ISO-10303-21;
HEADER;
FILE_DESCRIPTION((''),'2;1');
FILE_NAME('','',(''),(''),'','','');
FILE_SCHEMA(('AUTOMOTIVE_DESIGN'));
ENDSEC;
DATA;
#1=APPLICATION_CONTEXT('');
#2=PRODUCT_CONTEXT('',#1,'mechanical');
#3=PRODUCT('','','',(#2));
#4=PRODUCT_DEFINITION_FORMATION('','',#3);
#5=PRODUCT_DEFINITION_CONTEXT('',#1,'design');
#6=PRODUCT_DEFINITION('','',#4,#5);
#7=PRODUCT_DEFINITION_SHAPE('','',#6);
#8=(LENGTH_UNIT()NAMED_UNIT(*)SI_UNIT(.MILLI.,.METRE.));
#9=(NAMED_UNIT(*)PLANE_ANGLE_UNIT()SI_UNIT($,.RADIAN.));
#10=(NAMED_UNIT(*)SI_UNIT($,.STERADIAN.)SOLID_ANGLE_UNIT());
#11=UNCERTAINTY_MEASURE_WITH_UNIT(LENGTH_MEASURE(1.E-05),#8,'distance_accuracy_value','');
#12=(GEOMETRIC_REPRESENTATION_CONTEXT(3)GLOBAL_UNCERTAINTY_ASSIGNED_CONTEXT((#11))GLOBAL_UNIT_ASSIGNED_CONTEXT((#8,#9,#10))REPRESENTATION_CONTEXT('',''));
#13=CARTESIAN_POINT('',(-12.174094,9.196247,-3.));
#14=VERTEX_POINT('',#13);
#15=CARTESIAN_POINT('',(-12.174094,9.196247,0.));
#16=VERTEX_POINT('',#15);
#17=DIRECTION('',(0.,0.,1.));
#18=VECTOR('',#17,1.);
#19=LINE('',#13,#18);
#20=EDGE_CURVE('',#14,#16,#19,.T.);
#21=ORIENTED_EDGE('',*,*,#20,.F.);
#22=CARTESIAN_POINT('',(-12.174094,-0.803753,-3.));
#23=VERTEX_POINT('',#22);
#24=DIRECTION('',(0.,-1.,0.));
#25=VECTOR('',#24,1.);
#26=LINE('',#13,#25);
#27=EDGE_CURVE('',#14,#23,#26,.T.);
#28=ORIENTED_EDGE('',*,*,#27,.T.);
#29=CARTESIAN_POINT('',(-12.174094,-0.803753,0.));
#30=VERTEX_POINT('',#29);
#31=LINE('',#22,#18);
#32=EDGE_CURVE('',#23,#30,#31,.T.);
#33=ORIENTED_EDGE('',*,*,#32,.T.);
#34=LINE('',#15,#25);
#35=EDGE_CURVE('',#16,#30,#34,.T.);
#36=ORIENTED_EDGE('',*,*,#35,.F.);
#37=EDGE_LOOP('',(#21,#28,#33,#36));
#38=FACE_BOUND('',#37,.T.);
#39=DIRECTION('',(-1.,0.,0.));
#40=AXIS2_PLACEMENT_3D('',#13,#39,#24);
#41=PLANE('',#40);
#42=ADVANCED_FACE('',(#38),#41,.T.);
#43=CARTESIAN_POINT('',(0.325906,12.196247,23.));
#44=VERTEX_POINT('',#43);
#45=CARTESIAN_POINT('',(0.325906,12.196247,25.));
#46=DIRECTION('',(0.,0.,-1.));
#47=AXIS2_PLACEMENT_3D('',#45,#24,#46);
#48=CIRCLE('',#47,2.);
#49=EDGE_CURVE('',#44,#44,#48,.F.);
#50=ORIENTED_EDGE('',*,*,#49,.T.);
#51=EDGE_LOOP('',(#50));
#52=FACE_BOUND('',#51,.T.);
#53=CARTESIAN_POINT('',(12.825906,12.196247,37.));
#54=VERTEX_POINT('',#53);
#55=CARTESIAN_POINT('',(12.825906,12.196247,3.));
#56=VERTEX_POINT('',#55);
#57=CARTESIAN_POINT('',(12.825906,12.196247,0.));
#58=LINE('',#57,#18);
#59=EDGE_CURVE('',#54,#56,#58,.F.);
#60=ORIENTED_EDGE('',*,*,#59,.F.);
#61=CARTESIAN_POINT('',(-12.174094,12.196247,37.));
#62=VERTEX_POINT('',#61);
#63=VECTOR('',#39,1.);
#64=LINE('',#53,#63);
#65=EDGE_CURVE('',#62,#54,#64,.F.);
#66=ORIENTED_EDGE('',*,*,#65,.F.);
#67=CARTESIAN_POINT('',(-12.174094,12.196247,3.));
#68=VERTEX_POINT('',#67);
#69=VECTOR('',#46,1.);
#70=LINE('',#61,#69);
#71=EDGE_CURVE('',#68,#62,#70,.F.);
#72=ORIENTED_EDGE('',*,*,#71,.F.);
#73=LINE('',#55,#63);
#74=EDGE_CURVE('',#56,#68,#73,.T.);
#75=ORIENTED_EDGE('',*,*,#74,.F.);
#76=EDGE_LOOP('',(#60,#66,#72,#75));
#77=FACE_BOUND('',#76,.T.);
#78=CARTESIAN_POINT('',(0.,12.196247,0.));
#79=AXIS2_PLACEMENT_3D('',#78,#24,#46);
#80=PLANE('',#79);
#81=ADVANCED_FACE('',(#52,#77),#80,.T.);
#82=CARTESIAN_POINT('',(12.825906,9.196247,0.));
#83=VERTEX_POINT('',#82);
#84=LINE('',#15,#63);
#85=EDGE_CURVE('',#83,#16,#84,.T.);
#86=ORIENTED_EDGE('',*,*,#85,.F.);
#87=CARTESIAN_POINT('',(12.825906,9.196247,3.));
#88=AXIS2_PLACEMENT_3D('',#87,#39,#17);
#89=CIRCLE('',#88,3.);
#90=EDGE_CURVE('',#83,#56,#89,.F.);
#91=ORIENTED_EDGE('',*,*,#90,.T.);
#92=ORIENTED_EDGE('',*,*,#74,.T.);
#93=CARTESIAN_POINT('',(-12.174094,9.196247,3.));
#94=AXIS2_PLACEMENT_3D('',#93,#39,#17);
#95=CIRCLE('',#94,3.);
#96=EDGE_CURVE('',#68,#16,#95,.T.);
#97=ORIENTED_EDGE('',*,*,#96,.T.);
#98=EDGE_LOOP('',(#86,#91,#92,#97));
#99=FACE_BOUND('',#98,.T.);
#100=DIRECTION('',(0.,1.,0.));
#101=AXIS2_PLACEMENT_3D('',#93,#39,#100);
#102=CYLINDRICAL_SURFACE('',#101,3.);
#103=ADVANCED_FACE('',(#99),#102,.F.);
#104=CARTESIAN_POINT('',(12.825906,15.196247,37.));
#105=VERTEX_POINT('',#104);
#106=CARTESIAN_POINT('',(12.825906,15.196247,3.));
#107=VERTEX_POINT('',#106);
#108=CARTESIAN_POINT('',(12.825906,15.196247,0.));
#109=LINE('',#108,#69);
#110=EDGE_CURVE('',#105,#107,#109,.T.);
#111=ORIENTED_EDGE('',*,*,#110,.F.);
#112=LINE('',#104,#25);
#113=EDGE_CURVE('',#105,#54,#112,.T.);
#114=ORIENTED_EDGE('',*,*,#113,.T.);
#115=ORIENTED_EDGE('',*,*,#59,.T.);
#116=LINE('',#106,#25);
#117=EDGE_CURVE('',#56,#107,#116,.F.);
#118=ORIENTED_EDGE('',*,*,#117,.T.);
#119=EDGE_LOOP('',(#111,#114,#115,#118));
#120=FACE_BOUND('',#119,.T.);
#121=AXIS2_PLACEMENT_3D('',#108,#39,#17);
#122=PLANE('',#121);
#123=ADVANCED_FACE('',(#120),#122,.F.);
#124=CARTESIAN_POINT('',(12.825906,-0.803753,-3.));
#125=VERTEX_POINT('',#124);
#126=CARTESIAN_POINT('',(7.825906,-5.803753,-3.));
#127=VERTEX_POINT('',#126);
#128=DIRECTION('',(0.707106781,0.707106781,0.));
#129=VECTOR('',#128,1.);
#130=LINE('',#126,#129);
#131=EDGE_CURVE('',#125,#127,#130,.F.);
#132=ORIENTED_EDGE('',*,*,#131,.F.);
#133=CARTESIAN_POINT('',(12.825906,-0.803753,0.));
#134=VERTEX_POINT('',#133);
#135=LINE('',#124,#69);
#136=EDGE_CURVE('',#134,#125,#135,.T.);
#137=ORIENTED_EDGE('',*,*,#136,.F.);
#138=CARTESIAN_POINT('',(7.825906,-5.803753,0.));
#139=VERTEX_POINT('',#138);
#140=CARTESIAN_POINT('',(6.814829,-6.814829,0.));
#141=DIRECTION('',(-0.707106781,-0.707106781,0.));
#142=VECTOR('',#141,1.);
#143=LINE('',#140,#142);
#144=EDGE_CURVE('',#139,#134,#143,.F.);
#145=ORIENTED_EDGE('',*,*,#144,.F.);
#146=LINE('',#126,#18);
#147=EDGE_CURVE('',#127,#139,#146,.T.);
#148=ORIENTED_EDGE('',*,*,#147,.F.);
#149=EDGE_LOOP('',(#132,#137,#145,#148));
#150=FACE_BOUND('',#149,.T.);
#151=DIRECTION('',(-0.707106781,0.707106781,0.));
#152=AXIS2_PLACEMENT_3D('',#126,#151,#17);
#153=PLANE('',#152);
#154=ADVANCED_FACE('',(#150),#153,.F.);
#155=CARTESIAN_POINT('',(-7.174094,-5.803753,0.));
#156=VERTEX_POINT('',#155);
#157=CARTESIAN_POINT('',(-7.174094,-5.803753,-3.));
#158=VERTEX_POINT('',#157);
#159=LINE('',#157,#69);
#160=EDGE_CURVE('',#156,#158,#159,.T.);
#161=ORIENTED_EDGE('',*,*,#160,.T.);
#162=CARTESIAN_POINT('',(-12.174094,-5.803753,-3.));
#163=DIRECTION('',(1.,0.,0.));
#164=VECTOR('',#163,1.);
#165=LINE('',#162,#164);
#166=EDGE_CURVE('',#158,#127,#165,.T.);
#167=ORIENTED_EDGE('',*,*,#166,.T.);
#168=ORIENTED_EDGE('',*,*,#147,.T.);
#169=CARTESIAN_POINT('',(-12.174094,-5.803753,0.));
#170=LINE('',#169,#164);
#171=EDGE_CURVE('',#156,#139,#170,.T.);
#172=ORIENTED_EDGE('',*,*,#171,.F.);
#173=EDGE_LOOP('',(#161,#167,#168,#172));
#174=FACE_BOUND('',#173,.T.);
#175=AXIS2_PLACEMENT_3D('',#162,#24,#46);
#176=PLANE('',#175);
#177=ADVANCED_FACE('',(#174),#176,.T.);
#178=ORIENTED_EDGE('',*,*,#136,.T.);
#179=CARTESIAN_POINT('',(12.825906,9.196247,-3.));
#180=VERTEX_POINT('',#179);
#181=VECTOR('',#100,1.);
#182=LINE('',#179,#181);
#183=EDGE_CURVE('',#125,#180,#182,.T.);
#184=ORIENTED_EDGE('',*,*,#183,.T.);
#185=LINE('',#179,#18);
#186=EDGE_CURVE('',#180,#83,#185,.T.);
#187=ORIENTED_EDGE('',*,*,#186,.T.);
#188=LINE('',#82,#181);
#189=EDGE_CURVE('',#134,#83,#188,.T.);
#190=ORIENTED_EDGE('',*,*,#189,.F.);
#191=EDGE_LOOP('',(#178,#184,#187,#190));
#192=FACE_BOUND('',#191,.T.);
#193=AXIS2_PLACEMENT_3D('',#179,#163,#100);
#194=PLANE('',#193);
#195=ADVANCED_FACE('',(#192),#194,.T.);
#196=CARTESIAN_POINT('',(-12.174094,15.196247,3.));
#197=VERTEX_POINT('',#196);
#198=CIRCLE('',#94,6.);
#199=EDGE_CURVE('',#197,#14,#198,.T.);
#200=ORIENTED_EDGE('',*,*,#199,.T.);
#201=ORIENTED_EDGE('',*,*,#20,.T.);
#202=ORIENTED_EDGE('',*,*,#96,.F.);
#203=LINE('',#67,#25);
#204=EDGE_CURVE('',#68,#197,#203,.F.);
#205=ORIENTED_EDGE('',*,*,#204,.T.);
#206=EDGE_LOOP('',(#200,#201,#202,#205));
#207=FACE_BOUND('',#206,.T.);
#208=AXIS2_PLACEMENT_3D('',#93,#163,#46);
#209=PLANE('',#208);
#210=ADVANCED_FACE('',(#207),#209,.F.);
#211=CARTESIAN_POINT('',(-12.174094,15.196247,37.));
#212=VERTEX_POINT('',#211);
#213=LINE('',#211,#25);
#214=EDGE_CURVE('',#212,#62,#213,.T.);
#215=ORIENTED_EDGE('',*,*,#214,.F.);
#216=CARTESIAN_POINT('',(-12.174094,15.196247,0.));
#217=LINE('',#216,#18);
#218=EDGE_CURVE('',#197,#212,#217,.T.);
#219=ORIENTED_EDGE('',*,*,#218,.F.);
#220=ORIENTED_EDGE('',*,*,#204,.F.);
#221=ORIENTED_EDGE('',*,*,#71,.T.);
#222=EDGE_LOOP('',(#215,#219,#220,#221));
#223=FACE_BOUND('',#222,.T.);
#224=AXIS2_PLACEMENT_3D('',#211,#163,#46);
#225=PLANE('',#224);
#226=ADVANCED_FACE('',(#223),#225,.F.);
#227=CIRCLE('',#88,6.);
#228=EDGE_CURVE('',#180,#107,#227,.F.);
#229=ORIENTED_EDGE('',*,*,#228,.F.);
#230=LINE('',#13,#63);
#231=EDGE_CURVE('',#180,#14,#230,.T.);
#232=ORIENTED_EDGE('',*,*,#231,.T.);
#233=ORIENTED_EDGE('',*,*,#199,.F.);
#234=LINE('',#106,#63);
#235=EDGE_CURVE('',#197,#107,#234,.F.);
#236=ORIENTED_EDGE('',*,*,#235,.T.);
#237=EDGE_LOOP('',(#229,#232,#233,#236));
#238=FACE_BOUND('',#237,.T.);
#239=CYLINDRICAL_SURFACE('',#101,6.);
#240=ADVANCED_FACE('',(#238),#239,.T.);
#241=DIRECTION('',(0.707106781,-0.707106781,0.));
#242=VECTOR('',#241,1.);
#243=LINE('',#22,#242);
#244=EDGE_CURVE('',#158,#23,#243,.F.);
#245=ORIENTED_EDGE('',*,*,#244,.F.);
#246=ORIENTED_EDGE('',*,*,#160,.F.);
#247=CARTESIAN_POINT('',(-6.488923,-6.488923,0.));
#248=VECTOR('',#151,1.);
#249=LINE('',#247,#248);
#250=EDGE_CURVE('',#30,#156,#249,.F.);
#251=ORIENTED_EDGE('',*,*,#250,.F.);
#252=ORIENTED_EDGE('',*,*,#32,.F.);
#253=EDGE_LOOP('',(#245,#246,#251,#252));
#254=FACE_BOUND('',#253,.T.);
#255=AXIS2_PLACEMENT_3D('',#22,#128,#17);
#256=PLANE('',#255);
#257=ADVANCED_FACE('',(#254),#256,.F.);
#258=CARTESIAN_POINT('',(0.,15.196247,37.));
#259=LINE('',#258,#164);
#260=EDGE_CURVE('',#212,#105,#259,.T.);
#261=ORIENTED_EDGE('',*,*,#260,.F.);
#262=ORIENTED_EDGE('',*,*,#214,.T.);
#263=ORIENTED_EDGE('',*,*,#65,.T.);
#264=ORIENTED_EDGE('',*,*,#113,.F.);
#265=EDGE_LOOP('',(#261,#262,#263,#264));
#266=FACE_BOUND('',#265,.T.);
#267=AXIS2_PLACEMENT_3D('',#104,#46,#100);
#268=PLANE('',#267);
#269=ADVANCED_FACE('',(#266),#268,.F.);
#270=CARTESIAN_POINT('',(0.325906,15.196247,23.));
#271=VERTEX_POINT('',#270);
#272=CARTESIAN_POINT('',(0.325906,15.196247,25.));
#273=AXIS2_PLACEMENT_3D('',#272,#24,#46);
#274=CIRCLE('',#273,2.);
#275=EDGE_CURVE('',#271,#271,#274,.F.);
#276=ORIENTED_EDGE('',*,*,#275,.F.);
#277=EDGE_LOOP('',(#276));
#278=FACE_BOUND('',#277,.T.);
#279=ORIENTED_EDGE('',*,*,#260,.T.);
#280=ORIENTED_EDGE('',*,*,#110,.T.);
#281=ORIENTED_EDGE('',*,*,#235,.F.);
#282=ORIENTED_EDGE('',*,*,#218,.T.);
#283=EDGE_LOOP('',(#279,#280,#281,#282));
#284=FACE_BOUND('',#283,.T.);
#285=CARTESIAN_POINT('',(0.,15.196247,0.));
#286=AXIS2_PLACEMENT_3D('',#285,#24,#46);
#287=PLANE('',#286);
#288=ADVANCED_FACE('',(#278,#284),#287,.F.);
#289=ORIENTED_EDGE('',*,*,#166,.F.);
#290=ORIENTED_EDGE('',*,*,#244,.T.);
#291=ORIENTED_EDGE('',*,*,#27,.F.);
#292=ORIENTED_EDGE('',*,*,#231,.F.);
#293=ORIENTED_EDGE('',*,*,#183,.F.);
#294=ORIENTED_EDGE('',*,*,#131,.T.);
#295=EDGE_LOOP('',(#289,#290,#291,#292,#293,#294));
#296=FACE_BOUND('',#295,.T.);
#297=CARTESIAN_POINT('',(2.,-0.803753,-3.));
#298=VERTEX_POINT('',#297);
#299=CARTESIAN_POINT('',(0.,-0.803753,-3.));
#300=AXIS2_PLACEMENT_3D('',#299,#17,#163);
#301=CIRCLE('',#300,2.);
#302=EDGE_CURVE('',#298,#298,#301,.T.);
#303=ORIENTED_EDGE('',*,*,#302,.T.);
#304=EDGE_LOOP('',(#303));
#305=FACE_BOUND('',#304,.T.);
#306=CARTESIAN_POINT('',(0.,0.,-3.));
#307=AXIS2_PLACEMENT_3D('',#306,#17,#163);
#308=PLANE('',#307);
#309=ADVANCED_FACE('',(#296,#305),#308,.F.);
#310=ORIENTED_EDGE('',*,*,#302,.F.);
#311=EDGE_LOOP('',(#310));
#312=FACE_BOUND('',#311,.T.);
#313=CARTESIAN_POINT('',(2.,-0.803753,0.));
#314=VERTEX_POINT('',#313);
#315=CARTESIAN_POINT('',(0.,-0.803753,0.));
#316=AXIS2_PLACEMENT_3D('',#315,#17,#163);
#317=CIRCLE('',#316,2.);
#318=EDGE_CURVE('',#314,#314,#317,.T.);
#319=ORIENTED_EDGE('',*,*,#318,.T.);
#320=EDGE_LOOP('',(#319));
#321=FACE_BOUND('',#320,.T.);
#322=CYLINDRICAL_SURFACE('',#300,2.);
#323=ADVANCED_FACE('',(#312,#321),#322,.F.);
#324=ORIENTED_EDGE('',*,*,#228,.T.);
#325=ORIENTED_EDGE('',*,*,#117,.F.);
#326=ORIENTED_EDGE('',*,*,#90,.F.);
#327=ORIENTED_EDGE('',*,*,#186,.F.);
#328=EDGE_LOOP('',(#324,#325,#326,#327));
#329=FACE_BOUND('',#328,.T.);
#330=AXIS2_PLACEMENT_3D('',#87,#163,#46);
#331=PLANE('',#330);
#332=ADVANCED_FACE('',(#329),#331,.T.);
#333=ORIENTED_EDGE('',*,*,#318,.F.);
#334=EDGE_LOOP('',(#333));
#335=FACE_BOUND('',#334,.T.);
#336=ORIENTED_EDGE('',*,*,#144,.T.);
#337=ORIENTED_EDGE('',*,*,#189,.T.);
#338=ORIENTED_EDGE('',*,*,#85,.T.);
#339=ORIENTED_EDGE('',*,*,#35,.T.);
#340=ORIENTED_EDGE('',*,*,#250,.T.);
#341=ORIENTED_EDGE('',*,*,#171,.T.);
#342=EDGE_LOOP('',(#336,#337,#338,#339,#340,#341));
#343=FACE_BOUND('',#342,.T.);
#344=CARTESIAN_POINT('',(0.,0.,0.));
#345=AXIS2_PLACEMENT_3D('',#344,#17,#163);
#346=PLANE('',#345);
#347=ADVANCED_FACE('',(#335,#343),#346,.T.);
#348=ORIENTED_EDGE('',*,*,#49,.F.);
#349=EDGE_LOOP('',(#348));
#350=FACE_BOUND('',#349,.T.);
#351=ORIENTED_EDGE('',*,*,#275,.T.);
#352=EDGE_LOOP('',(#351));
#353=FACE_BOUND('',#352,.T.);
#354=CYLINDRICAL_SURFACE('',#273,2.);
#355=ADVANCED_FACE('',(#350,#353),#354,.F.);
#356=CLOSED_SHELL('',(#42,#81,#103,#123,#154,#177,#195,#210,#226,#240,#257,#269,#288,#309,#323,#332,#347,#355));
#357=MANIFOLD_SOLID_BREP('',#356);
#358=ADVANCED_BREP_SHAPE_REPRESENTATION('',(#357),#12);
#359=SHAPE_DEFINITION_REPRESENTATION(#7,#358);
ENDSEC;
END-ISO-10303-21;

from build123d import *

# Parameters (mm, degrees)
SKETCH1_W                 = 25
SKETCH1_H                 = 15
SKETCH1_R                 = 2
BASE_FLANGE1_DEPTH        = 3
EDGE_FLANGE1_DEPTH        = 25
EDGE_FLANGE1_START        = 3
EDGE_FLANGE1_PROFILE_W    = 25
EDGE_FLANGE1_PROFILE_H    = 34
EDGE_FLANGE1_PROFILE_R    = 2
EDGE_FLANGE1_FLAT_DEPTH   = 3
BREAK_CORNER1_START       = -12.712257412
BREAK_CORNER1_OUTLINE_W   = 19.637623744
BREAK_CORNER1_OUTLINE_H   = 3
BREAK_CORNER1_DEPTH       = 3.535533905
BREAK_CORNER1_START_2     = 1.429878211
BREAK_CORNER1_2_OUTLINE_W = 4.362376256
BREAK_CORNER1_2_OUTLINE_H = 3
BREAK_CORNER1_2_DEPTH     = 7.071067812


# Read off the part's stored shape, not the designer's step: Break-Corner1
# Sheet-metal steps are written as plain solids
with BuildPart() as part:
    # Sketch1 → Base-Flange1 (new body)
    with BuildSketch(Plane.XY):
        with Locations((0.325905683, 1.696247476)):
            Rectangle(SKETCH1_W, SKETCH1_H)
        with Locations((0, -0.803752524)):
            Circle(SKETCH1_R, mode=Mode.SUBTRACT)
    extrude(amount=-BASE_FLANGE1_DEPTH)

    # Edge-Flange1 bend section (across the edge) → Edge-Flange1 (add)
    with BuildSketch(Plane(origin=(12.825905683, 12.196247476, 0), x_dir=(0, -1, 0), z_dir=(-1, 0, 0))):
        with BuildLine():
            Line((-3, 3), (0, 3))
            ThreePointArc((0, 3), (0.878679656, 0.878679656), (3, 0))
            Line((3, 0), (3, -3))
            ThreePointArc((3, -3), (-1.242640687, -1.242640687), (-3, 3))
        make_face()
    extrude(amount=EDGE_FLANGE1_DEPTH)

    # Edge-Flange1 profile (on flange) → Edge-Flange1 flat (add)
    with BuildSketch(Plane(origin=(0, 12.196247476, 0), x_dir=(-1, 0, 0), z_dir=(0, 1, 0)).offset(EDGE_FLANGE1_START)):
        with Locations((-0.325905683, 20)):
            Rectangle(EDGE_FLANGE1_PROFILE_W, EDGE_FLANGE1_PROFILE_H)
        with Locations((-0.325905683, 25)):
            Circle(EDGE_FLANGE1_PROFILE_R, mode=Mode.SUBTRACT)
    extrude(amount=-EDGE_FLANGE1_FLAT_DEPTH)

    # Break-Corner1 outline → Break-Corner1 (cut)
    with BuildSketch(Plane(origin=(0, 0, 0), x_dir=(0.707106781186548, -0.707106781186547, 0), z_dir=(0.707106781186547, 0.707106781186548, 0)).offset(BREAK_CORNER1_START)):
        with Locations((-0.181188128, 1.5)):
            Rectangle(BREAK_CORNER1_OUTLINE_W, BREAK_CORNER1_OUTLINE_H)
    extrude(amount=BREAK_CORNER1_DEPTH, mode=Mode.SUBTRACT)

    # Break-Corner1 2 outline → Break-Corner1 2 (cut)
    with BuildSketch(Plane(origin=(0, 0, 0), x_dir=(0.707106781186548, -0.707106781186547, 0), z_dir=(0.707106781186547, 0.707106781186548, 0)).offset(BREAK_CORNER1_START_2)):
        with Locations((11.818811872, 1.5)):
            Rectangle(BREAK_CORNER1_2_OUTLINE_W, BREAK_CORNER1_2_OUTLINE_H)
    extrude(amount=BREAK_CORNER1_2_DEPTH, mode=Mode.SUBTRACT)


solid = part.part
